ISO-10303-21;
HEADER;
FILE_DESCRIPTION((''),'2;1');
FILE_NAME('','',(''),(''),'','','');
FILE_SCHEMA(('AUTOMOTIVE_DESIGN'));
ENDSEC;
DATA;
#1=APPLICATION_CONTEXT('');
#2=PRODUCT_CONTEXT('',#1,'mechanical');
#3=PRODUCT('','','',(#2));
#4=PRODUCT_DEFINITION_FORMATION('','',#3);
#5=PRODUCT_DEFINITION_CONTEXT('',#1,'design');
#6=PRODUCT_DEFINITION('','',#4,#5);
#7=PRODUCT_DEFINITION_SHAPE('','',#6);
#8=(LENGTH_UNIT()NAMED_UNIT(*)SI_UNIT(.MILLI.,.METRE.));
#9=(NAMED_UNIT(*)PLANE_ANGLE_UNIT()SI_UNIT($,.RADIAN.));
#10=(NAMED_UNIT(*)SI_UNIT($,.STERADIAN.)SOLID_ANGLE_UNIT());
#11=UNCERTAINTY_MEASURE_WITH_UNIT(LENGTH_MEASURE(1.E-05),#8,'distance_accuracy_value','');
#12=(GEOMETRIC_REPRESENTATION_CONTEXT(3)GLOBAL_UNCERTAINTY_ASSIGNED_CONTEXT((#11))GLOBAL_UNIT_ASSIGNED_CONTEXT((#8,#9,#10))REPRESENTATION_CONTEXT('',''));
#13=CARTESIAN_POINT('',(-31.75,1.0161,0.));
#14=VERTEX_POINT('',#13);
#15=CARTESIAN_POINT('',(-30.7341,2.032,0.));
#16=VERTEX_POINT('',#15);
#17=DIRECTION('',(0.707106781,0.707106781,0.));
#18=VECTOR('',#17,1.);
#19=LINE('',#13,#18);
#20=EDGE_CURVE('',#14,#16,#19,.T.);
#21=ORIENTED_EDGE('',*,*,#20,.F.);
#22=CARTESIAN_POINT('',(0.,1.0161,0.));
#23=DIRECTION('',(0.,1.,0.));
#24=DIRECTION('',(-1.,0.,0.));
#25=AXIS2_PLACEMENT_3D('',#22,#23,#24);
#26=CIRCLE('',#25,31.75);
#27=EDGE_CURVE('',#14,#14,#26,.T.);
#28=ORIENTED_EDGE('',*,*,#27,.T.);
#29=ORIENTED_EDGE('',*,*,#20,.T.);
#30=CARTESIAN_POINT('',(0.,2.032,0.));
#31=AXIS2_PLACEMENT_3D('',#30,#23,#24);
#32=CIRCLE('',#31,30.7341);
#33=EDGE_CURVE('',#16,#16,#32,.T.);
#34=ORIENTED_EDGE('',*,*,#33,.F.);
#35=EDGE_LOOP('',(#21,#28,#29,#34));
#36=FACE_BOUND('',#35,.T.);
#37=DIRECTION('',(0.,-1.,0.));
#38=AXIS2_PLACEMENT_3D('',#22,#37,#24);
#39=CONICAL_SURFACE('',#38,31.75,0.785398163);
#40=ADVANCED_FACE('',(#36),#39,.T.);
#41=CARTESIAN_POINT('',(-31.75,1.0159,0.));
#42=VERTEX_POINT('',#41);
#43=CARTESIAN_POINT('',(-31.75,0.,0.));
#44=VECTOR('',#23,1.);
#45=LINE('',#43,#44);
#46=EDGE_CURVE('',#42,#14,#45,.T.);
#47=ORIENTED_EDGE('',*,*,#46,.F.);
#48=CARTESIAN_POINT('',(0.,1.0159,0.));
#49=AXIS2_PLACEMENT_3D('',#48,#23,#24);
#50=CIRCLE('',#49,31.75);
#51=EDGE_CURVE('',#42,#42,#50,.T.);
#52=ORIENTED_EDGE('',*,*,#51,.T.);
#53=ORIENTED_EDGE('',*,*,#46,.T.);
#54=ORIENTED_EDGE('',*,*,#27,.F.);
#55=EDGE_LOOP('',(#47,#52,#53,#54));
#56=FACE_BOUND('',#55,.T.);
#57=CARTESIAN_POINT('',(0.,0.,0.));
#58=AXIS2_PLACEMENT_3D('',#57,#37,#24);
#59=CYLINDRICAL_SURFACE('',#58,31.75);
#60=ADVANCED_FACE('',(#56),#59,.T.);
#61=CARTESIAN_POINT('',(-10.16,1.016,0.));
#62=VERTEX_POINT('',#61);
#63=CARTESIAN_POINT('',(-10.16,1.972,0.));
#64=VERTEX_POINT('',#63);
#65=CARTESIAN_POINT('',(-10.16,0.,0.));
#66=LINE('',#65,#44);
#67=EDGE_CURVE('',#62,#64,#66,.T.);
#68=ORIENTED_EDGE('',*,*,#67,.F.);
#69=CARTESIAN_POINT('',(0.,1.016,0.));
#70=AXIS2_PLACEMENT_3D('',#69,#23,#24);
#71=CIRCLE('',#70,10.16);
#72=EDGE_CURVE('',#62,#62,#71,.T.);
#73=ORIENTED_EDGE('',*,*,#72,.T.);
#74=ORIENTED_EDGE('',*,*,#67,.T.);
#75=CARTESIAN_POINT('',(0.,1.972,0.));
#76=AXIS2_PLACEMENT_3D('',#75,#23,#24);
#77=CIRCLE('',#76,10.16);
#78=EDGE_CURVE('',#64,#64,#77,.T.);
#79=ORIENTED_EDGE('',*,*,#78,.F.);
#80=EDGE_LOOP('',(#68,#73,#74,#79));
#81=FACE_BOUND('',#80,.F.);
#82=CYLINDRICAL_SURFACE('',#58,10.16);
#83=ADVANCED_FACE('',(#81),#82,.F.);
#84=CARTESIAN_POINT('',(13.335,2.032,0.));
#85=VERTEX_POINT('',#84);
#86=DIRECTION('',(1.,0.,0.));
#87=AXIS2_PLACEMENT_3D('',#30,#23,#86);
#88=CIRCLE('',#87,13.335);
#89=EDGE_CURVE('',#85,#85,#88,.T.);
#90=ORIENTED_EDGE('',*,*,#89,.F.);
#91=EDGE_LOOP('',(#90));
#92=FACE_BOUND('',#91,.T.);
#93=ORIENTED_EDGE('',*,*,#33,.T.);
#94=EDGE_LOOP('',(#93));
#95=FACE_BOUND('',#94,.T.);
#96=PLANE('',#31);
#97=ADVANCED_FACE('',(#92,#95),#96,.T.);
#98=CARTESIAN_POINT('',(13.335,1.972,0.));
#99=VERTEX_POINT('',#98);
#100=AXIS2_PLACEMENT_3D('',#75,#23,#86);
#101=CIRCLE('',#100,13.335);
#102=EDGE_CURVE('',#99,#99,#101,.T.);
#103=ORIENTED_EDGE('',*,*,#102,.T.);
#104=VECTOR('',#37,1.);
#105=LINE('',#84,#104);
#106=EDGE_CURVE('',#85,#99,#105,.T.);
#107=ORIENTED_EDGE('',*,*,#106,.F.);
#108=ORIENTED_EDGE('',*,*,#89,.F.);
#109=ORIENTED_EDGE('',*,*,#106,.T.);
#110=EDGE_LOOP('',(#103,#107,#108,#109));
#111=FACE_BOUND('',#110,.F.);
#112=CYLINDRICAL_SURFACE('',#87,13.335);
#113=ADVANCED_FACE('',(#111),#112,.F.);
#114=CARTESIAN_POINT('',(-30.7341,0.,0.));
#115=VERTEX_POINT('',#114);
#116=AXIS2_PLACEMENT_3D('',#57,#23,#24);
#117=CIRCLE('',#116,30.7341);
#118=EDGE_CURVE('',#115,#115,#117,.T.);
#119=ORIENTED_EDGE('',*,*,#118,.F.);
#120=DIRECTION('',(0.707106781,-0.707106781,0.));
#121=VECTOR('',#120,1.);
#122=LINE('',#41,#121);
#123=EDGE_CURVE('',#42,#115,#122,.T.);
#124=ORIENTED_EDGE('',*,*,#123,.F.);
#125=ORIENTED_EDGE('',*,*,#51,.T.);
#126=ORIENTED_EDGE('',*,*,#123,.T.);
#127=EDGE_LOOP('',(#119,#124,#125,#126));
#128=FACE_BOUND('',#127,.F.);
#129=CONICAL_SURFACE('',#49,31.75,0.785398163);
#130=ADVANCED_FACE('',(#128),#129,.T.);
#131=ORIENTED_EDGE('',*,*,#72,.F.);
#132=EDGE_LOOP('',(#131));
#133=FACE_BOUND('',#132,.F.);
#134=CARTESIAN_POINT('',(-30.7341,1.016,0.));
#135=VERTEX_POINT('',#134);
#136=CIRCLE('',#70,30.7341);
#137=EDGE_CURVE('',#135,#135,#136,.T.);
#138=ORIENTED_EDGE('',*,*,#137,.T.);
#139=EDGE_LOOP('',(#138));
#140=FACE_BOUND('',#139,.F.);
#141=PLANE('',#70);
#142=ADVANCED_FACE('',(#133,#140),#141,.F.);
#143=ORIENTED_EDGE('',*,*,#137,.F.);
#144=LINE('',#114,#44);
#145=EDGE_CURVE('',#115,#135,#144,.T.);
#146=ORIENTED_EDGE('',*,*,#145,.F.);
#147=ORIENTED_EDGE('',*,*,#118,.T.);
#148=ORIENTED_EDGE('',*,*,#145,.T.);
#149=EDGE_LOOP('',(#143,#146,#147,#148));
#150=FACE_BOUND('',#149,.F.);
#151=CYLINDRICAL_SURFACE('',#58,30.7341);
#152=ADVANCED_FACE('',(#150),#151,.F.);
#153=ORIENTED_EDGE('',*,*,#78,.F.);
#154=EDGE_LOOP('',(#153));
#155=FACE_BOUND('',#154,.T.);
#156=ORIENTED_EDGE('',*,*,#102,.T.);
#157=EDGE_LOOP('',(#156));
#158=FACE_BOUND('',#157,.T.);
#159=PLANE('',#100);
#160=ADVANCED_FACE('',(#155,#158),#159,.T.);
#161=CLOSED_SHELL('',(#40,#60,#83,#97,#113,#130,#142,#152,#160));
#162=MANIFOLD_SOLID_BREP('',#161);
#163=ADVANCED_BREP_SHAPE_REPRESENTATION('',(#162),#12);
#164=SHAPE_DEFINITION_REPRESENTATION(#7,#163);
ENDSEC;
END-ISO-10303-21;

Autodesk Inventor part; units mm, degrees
ref_plane "YZ Plane" through (0, 0, 0) normal (1, 0, 0) x (0, 1, 0)
ref_plane "XZ Plane" through (0, 0, 0) normal (0, 1, 0) x (-1, 0, 0)
ref_plane "XY Plane" through (0, 0, 0) normal (0, 0, 1) x (1, 0, 0)
sketch "Sketch1" plane through (0, 0, 0) normal (0, 1, 0) x (-1, 0, 0)
  circle A0 centre (0, 0) radius 31.75
  circle A1 centre (0, 0) radius 10.16
  dimension "d0" = 63.5
  dimension "d1" = 20.32
extrude "Extrusion1" add sketch "Sketch1" along normal blind 2.032
sketch "Sketch2" plane through (0, 2.032, 0) normal (0, 1, 0) x (1, 0, 0)
  circle A0 centre (0, 0) radius 10.16 projected
  circle A1 centre (0, 0) radius 31.75 projected
  circle A2 centre (0, 0) radius 13.335
  dimension "d4" = 26.67
extrude "Extrusion2" cut sketch "Sketch2" against normal blind 0.06 contours A2
chamfer "Chamfer1" distance 1.016 angle 45 2 edges at (31.75, 2.032, 0) (31.75, 0, 0)
sketch "Sketch3" plane through (0, 0, 0) normal (0, -1, 0) x (1, 0, 0)
  circle A0 centre (0, 0) radius 10.16 projected
  circle A1 centre (0, 0) radius 30.734 projected
emboss "Emboss1" sketch "Sketch3" operation cut depth 1.016 direction (0, 1, 0)
properties part number "Si Frame Mk 3"
